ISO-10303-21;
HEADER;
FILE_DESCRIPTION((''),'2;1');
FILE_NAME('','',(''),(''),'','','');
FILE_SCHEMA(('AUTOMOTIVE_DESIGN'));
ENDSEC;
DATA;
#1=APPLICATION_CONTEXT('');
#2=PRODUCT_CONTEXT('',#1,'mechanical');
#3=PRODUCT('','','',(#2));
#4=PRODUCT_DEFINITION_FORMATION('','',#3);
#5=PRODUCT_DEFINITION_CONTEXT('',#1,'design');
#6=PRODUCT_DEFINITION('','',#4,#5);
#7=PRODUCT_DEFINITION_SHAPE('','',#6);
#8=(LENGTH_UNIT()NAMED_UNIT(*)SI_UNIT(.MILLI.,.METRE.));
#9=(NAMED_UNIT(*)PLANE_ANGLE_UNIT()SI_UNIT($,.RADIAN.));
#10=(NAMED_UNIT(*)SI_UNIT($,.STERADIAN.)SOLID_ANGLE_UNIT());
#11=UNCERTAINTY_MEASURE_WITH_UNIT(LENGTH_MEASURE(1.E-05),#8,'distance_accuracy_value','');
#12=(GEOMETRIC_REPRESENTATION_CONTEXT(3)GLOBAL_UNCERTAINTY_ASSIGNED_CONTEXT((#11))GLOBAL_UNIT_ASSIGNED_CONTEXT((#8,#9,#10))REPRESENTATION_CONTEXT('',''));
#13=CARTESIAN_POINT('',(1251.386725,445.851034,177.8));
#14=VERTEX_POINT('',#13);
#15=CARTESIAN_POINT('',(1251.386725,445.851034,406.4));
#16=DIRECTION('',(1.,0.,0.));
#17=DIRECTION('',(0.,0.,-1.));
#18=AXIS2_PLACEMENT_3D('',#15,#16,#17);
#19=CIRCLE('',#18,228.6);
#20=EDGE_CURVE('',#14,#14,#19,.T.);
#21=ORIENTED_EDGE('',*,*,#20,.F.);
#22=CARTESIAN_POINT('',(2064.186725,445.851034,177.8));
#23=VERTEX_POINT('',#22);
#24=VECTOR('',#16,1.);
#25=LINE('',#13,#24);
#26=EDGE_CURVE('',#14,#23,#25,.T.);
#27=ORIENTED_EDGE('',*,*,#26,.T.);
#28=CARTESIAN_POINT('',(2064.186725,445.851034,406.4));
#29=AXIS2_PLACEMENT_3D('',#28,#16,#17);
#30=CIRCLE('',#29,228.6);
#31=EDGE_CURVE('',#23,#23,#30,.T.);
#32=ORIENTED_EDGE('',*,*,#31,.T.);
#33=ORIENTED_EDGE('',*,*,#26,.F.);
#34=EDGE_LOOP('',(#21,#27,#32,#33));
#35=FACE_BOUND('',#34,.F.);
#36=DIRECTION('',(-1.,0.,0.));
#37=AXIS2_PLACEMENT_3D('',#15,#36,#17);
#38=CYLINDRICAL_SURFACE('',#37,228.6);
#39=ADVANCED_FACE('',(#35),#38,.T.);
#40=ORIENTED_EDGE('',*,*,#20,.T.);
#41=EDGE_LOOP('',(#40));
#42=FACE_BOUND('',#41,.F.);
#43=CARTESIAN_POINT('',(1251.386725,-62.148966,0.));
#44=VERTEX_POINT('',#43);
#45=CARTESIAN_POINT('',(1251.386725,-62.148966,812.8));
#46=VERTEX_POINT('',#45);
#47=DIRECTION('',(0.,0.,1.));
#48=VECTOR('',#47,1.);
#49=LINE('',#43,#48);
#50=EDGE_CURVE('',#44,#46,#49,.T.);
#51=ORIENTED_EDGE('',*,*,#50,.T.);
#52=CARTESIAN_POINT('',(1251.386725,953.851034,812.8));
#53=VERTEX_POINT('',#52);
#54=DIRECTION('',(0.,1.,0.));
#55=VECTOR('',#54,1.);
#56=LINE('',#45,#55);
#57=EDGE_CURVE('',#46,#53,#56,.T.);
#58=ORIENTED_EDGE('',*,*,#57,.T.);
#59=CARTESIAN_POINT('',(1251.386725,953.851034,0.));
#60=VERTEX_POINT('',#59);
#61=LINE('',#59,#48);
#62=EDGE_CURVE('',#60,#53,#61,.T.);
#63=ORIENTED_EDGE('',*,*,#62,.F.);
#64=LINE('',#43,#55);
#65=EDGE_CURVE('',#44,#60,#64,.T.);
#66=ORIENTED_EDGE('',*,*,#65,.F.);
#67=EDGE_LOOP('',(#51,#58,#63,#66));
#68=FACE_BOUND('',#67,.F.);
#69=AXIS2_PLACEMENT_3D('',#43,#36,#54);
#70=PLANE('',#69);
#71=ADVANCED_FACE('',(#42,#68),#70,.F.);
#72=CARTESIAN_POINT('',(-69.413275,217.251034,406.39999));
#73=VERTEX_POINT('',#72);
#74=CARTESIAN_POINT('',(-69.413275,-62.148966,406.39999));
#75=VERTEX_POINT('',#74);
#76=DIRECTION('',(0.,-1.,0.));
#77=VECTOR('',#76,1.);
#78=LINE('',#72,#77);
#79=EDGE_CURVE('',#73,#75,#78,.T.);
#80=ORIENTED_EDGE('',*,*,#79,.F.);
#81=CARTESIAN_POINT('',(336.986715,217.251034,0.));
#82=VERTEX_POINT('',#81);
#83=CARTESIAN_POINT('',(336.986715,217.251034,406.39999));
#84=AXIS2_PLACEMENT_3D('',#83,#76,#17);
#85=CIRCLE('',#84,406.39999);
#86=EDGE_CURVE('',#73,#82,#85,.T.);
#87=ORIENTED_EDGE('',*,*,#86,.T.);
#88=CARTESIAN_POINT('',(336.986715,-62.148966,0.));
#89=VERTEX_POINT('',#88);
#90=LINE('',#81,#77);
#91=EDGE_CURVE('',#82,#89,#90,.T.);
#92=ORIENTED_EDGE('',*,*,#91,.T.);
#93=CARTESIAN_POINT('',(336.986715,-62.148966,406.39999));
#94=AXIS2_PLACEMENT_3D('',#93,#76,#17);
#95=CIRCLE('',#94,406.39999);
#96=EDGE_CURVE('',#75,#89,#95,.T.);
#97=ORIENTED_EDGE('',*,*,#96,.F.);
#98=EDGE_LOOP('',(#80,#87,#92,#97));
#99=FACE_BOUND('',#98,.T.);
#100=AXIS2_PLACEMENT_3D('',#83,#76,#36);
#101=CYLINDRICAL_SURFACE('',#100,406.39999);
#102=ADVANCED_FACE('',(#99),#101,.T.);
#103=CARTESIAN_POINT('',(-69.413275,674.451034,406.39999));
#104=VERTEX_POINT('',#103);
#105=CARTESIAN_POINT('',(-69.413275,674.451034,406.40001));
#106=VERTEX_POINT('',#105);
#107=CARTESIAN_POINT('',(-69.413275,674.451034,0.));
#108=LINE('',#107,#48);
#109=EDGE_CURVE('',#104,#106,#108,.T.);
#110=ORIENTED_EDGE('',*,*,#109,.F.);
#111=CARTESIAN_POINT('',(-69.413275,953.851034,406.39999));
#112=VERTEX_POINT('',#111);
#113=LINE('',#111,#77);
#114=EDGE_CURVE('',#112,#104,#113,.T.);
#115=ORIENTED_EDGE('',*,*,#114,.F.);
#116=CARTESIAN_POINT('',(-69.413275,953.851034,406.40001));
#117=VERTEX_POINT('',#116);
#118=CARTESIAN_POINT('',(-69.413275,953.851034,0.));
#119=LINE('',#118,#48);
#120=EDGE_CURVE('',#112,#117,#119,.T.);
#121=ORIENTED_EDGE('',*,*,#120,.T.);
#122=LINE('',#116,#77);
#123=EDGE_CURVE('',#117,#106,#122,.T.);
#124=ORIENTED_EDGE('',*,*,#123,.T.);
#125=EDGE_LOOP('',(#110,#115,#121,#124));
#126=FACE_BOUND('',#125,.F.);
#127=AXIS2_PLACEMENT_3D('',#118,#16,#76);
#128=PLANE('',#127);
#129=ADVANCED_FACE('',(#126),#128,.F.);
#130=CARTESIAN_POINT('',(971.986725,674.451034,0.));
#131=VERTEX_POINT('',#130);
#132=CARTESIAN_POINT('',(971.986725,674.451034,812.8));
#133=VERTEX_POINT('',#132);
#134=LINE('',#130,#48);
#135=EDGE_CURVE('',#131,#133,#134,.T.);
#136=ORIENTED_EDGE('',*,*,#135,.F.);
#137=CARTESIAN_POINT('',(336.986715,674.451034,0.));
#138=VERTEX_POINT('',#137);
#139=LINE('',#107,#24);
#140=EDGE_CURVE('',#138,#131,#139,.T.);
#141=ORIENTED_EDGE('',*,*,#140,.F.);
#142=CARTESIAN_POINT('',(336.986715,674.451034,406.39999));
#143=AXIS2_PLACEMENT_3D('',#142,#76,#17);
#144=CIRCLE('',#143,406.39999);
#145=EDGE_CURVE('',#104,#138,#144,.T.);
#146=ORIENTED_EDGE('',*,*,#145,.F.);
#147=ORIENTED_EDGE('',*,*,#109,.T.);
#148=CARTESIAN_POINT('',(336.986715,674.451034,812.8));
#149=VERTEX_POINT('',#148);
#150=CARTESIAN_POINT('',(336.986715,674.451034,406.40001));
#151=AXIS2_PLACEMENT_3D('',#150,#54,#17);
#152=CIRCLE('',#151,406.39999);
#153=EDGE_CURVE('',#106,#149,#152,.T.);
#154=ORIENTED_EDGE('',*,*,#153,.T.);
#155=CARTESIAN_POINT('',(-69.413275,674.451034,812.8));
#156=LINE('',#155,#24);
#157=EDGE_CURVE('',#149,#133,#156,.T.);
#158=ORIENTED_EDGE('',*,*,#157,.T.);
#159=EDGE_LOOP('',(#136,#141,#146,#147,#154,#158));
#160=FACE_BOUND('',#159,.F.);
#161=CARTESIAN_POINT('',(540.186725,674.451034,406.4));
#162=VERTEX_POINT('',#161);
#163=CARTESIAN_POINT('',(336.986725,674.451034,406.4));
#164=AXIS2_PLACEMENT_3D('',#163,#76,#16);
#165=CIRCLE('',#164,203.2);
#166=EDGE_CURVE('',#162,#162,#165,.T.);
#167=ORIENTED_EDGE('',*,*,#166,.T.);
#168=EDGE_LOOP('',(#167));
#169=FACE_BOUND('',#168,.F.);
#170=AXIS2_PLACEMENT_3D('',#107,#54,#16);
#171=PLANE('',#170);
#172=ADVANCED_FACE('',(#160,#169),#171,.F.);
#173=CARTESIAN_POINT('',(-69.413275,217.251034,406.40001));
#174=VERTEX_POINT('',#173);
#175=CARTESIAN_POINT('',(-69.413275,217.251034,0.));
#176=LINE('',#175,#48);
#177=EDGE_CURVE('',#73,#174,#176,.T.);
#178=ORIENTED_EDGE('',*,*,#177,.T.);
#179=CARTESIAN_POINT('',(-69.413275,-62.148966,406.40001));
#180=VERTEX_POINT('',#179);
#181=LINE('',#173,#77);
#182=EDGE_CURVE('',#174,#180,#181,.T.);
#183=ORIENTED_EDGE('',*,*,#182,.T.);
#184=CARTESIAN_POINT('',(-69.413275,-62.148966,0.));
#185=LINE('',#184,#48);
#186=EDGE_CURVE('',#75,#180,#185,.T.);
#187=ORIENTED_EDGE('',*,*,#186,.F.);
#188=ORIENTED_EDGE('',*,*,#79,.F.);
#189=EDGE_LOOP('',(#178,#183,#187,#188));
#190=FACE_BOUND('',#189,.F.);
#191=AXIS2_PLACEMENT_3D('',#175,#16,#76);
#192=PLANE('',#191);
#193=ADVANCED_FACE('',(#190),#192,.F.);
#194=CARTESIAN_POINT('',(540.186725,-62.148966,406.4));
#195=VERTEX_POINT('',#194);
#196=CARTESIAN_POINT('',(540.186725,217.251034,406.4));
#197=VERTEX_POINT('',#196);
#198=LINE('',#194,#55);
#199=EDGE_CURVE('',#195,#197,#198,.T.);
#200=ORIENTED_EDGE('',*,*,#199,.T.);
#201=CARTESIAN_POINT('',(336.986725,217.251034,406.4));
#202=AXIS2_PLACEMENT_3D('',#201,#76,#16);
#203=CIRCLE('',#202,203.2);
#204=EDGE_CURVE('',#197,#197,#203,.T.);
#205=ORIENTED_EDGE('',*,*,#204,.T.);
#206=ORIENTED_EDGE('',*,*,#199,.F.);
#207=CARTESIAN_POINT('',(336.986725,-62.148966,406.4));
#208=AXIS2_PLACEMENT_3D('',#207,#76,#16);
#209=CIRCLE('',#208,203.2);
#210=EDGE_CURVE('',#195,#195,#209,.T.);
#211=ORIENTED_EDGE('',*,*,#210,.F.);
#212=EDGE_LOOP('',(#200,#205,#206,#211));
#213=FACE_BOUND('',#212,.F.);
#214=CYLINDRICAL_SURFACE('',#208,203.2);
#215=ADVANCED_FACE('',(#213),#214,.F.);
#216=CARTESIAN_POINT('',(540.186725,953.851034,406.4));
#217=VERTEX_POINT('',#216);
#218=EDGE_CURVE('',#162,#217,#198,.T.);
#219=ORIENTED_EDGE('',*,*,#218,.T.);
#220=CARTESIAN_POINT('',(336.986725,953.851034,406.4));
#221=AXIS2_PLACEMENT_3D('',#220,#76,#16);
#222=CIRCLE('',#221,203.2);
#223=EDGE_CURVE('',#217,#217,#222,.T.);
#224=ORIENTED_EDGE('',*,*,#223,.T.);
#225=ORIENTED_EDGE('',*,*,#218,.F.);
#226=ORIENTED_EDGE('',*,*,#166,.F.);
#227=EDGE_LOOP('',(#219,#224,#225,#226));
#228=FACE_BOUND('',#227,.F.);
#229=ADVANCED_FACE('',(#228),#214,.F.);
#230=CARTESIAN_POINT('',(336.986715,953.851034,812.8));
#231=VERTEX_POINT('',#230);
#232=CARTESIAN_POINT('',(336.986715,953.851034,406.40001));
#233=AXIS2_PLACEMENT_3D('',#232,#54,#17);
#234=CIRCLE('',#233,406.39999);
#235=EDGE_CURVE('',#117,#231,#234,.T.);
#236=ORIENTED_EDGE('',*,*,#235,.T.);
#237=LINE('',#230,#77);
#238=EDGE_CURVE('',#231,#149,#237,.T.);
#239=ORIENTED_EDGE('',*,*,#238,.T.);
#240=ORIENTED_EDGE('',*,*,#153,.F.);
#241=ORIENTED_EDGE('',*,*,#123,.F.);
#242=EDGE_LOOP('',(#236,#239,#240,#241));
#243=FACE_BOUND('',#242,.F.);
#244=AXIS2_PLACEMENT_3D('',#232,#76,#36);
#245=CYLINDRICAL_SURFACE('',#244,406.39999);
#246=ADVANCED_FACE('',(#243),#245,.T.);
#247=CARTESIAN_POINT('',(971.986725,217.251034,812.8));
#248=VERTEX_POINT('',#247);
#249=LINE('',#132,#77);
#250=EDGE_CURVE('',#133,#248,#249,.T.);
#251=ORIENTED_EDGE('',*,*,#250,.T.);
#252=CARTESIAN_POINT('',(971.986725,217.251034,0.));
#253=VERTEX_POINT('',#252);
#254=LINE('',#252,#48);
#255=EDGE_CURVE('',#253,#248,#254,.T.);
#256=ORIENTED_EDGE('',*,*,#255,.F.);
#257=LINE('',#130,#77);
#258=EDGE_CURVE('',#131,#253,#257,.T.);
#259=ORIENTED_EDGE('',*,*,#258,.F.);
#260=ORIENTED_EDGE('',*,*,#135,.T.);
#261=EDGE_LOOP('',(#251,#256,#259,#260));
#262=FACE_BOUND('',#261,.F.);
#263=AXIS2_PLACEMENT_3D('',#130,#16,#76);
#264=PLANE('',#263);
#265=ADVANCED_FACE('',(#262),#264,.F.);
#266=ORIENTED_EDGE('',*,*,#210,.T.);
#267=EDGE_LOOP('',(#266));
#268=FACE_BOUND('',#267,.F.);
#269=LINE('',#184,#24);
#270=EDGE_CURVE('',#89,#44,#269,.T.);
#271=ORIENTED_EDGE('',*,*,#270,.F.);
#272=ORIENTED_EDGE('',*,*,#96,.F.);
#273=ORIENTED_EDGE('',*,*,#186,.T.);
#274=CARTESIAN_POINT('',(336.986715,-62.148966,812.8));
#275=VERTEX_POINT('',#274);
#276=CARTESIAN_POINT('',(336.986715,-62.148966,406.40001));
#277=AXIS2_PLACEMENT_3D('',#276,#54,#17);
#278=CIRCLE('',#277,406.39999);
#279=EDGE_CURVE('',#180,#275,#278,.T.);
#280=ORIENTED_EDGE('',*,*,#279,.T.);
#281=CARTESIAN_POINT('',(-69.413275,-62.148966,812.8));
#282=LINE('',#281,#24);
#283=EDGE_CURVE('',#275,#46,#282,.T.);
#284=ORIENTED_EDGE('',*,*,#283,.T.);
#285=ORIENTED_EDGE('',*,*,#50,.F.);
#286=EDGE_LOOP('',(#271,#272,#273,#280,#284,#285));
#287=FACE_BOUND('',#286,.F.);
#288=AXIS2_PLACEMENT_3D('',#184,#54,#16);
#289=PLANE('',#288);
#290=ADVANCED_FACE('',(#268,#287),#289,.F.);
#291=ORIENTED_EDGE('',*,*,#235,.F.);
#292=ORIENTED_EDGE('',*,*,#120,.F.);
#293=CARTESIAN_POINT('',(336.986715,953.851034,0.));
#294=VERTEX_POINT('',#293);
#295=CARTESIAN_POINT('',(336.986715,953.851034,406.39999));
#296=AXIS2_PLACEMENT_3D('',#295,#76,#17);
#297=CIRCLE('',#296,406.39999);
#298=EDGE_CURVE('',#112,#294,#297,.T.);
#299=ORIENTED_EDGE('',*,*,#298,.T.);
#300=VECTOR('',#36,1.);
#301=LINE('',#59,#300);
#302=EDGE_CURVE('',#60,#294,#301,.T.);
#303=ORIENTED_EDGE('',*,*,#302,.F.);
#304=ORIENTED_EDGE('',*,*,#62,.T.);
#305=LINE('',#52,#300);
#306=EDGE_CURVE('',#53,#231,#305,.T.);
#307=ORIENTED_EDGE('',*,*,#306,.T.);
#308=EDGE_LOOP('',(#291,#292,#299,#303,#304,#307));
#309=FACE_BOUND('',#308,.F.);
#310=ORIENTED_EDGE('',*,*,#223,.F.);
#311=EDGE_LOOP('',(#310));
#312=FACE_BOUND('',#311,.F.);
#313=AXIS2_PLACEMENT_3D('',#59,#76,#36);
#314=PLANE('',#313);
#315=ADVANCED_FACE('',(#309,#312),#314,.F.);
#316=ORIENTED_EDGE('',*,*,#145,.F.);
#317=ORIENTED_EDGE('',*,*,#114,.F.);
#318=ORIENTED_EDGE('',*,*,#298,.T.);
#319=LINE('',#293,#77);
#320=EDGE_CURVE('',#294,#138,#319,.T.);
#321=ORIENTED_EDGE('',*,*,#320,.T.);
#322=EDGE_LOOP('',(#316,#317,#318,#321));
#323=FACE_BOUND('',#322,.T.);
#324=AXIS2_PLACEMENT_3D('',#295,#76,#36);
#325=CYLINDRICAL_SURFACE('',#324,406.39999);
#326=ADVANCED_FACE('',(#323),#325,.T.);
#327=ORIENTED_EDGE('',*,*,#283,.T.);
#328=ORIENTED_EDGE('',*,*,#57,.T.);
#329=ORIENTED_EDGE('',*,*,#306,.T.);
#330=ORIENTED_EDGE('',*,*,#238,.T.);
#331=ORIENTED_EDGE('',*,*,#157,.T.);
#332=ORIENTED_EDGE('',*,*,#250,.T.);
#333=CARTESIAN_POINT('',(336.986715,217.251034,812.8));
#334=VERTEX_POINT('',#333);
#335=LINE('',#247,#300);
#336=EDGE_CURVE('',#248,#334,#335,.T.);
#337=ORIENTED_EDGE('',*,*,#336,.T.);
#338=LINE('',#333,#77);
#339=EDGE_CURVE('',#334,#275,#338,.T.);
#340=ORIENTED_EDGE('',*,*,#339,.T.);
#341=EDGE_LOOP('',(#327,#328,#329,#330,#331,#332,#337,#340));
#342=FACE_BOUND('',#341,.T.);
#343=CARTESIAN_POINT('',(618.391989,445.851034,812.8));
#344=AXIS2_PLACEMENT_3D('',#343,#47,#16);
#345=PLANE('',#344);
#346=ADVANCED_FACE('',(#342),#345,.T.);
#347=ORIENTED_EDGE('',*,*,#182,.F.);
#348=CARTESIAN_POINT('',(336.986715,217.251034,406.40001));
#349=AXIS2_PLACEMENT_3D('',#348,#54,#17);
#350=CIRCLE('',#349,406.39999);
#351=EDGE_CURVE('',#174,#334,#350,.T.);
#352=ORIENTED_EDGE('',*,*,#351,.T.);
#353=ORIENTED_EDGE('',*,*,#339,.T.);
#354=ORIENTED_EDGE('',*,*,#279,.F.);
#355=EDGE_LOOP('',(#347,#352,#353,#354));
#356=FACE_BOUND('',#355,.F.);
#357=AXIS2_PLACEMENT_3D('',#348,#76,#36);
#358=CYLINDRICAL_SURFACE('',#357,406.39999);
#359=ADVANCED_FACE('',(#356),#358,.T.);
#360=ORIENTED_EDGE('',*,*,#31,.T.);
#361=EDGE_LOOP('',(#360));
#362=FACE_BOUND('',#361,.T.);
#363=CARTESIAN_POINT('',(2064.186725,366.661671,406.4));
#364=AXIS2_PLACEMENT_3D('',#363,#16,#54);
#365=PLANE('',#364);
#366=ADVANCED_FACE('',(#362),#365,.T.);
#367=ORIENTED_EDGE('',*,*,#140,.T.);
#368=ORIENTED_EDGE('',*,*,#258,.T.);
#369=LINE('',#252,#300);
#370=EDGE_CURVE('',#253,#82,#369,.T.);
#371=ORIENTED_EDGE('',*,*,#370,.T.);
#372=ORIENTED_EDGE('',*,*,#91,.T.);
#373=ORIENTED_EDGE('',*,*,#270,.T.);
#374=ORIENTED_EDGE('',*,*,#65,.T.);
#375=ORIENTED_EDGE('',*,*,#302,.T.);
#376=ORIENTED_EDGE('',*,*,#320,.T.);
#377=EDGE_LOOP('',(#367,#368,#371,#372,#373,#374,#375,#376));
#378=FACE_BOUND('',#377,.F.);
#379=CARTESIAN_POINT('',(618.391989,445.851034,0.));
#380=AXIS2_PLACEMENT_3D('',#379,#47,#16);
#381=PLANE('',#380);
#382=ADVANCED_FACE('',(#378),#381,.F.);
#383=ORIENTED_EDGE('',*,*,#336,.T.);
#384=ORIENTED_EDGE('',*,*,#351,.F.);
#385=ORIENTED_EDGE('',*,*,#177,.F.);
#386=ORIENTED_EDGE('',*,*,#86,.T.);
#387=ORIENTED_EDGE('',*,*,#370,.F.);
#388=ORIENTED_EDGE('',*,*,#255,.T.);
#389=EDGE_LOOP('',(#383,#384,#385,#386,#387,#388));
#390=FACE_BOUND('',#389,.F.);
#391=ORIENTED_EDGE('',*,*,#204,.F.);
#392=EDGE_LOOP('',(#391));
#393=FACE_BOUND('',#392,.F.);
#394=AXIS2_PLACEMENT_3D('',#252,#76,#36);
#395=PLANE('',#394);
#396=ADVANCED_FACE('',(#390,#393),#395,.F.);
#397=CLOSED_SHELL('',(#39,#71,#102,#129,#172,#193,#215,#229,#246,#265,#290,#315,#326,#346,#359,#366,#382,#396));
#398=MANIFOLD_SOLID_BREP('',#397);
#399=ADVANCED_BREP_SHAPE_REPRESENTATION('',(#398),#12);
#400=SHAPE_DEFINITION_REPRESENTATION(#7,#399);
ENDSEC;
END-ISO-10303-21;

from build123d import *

# Parameters (mm, degrees)
F1_DEPTH = 812.8
F2_R     = 406.39999
F3_R     = 203.2
F4_DEPTH = 1016.001
F6_DEPTH = 812.8


# Not quite as in the source:
# - a fillet or chamfer is up to 0.001 mm smaller than in the source, because OpenCascade refuses the exact size


with BuildPart() as f1:
    # F0 (on Top) → F1 (new body)
    with BuildSketch(Plane.XY):
        Polygon((-69.4132745266, 217.2510341048), (-69.4132745266, -62.1489658952), (1251.3867254734, -62.1489658952), (1251.3867254734, 953.8510341048), (-69.4132745266, 953.8510341048), (-69.4132745266, 674.4510341048), (971.9867254734, 674.4510341048), (971.9867254734, 217.2510341048), align=None)
    extrude(amount=F1_DEPTH)

    # F2 (radius 406.4 in the source; OpenCascade refuses exactly that, so slightly less here)
    f2_edges = [f1.edges().sort_by_distance(p)[0] for p in [
        (-69.413275, 77.551034, 812.8),
        (-69.413275, 77.551034, 0),
        (-69.413275, 814.151034, 812.8),
        (-69.413275, 814.151034, 0),
    ]]
    fillet(f2_edges, radius=F2_R)

    # F3 (on face) → F4 (cut, through all)
    with BuildSketch(Plane.XZ.offset(62.1489658952)):
        with Locations((336.9867254734, 406.4)):
            Circle(F3_R)
    extrude(amount=-F4_DEPTH, mode=Mode.SUBTRACT)

    # F5 (on face) → F6 (join)
    with BuildSketch(Plane.YZ.offset(1251.3867254734)):
        with BuildLine():
            Line((445.8510341048, 177.8), (445.8510341048, 635))
            ThreePointArc((445.8510341048, 635), (217.2510341048, 406.4), (445.8510341048, 177.8))
        make_face()
        with BuildLine():
            ThreePointArc((674.4510341048, 406.4), (607.4956442841, 568.0446101792), (445.8510341048, 635))
            Line((445.8510341048, 635), (445.8510341048, 177.8))
            ThreePointArc((445.8510341048, 177.8), (607.4956442841, 244.7553898208), (674.4510341048, 406.4))
        make_face()
    extrude(amount=F6_DEPTH)


solid = f1.part
